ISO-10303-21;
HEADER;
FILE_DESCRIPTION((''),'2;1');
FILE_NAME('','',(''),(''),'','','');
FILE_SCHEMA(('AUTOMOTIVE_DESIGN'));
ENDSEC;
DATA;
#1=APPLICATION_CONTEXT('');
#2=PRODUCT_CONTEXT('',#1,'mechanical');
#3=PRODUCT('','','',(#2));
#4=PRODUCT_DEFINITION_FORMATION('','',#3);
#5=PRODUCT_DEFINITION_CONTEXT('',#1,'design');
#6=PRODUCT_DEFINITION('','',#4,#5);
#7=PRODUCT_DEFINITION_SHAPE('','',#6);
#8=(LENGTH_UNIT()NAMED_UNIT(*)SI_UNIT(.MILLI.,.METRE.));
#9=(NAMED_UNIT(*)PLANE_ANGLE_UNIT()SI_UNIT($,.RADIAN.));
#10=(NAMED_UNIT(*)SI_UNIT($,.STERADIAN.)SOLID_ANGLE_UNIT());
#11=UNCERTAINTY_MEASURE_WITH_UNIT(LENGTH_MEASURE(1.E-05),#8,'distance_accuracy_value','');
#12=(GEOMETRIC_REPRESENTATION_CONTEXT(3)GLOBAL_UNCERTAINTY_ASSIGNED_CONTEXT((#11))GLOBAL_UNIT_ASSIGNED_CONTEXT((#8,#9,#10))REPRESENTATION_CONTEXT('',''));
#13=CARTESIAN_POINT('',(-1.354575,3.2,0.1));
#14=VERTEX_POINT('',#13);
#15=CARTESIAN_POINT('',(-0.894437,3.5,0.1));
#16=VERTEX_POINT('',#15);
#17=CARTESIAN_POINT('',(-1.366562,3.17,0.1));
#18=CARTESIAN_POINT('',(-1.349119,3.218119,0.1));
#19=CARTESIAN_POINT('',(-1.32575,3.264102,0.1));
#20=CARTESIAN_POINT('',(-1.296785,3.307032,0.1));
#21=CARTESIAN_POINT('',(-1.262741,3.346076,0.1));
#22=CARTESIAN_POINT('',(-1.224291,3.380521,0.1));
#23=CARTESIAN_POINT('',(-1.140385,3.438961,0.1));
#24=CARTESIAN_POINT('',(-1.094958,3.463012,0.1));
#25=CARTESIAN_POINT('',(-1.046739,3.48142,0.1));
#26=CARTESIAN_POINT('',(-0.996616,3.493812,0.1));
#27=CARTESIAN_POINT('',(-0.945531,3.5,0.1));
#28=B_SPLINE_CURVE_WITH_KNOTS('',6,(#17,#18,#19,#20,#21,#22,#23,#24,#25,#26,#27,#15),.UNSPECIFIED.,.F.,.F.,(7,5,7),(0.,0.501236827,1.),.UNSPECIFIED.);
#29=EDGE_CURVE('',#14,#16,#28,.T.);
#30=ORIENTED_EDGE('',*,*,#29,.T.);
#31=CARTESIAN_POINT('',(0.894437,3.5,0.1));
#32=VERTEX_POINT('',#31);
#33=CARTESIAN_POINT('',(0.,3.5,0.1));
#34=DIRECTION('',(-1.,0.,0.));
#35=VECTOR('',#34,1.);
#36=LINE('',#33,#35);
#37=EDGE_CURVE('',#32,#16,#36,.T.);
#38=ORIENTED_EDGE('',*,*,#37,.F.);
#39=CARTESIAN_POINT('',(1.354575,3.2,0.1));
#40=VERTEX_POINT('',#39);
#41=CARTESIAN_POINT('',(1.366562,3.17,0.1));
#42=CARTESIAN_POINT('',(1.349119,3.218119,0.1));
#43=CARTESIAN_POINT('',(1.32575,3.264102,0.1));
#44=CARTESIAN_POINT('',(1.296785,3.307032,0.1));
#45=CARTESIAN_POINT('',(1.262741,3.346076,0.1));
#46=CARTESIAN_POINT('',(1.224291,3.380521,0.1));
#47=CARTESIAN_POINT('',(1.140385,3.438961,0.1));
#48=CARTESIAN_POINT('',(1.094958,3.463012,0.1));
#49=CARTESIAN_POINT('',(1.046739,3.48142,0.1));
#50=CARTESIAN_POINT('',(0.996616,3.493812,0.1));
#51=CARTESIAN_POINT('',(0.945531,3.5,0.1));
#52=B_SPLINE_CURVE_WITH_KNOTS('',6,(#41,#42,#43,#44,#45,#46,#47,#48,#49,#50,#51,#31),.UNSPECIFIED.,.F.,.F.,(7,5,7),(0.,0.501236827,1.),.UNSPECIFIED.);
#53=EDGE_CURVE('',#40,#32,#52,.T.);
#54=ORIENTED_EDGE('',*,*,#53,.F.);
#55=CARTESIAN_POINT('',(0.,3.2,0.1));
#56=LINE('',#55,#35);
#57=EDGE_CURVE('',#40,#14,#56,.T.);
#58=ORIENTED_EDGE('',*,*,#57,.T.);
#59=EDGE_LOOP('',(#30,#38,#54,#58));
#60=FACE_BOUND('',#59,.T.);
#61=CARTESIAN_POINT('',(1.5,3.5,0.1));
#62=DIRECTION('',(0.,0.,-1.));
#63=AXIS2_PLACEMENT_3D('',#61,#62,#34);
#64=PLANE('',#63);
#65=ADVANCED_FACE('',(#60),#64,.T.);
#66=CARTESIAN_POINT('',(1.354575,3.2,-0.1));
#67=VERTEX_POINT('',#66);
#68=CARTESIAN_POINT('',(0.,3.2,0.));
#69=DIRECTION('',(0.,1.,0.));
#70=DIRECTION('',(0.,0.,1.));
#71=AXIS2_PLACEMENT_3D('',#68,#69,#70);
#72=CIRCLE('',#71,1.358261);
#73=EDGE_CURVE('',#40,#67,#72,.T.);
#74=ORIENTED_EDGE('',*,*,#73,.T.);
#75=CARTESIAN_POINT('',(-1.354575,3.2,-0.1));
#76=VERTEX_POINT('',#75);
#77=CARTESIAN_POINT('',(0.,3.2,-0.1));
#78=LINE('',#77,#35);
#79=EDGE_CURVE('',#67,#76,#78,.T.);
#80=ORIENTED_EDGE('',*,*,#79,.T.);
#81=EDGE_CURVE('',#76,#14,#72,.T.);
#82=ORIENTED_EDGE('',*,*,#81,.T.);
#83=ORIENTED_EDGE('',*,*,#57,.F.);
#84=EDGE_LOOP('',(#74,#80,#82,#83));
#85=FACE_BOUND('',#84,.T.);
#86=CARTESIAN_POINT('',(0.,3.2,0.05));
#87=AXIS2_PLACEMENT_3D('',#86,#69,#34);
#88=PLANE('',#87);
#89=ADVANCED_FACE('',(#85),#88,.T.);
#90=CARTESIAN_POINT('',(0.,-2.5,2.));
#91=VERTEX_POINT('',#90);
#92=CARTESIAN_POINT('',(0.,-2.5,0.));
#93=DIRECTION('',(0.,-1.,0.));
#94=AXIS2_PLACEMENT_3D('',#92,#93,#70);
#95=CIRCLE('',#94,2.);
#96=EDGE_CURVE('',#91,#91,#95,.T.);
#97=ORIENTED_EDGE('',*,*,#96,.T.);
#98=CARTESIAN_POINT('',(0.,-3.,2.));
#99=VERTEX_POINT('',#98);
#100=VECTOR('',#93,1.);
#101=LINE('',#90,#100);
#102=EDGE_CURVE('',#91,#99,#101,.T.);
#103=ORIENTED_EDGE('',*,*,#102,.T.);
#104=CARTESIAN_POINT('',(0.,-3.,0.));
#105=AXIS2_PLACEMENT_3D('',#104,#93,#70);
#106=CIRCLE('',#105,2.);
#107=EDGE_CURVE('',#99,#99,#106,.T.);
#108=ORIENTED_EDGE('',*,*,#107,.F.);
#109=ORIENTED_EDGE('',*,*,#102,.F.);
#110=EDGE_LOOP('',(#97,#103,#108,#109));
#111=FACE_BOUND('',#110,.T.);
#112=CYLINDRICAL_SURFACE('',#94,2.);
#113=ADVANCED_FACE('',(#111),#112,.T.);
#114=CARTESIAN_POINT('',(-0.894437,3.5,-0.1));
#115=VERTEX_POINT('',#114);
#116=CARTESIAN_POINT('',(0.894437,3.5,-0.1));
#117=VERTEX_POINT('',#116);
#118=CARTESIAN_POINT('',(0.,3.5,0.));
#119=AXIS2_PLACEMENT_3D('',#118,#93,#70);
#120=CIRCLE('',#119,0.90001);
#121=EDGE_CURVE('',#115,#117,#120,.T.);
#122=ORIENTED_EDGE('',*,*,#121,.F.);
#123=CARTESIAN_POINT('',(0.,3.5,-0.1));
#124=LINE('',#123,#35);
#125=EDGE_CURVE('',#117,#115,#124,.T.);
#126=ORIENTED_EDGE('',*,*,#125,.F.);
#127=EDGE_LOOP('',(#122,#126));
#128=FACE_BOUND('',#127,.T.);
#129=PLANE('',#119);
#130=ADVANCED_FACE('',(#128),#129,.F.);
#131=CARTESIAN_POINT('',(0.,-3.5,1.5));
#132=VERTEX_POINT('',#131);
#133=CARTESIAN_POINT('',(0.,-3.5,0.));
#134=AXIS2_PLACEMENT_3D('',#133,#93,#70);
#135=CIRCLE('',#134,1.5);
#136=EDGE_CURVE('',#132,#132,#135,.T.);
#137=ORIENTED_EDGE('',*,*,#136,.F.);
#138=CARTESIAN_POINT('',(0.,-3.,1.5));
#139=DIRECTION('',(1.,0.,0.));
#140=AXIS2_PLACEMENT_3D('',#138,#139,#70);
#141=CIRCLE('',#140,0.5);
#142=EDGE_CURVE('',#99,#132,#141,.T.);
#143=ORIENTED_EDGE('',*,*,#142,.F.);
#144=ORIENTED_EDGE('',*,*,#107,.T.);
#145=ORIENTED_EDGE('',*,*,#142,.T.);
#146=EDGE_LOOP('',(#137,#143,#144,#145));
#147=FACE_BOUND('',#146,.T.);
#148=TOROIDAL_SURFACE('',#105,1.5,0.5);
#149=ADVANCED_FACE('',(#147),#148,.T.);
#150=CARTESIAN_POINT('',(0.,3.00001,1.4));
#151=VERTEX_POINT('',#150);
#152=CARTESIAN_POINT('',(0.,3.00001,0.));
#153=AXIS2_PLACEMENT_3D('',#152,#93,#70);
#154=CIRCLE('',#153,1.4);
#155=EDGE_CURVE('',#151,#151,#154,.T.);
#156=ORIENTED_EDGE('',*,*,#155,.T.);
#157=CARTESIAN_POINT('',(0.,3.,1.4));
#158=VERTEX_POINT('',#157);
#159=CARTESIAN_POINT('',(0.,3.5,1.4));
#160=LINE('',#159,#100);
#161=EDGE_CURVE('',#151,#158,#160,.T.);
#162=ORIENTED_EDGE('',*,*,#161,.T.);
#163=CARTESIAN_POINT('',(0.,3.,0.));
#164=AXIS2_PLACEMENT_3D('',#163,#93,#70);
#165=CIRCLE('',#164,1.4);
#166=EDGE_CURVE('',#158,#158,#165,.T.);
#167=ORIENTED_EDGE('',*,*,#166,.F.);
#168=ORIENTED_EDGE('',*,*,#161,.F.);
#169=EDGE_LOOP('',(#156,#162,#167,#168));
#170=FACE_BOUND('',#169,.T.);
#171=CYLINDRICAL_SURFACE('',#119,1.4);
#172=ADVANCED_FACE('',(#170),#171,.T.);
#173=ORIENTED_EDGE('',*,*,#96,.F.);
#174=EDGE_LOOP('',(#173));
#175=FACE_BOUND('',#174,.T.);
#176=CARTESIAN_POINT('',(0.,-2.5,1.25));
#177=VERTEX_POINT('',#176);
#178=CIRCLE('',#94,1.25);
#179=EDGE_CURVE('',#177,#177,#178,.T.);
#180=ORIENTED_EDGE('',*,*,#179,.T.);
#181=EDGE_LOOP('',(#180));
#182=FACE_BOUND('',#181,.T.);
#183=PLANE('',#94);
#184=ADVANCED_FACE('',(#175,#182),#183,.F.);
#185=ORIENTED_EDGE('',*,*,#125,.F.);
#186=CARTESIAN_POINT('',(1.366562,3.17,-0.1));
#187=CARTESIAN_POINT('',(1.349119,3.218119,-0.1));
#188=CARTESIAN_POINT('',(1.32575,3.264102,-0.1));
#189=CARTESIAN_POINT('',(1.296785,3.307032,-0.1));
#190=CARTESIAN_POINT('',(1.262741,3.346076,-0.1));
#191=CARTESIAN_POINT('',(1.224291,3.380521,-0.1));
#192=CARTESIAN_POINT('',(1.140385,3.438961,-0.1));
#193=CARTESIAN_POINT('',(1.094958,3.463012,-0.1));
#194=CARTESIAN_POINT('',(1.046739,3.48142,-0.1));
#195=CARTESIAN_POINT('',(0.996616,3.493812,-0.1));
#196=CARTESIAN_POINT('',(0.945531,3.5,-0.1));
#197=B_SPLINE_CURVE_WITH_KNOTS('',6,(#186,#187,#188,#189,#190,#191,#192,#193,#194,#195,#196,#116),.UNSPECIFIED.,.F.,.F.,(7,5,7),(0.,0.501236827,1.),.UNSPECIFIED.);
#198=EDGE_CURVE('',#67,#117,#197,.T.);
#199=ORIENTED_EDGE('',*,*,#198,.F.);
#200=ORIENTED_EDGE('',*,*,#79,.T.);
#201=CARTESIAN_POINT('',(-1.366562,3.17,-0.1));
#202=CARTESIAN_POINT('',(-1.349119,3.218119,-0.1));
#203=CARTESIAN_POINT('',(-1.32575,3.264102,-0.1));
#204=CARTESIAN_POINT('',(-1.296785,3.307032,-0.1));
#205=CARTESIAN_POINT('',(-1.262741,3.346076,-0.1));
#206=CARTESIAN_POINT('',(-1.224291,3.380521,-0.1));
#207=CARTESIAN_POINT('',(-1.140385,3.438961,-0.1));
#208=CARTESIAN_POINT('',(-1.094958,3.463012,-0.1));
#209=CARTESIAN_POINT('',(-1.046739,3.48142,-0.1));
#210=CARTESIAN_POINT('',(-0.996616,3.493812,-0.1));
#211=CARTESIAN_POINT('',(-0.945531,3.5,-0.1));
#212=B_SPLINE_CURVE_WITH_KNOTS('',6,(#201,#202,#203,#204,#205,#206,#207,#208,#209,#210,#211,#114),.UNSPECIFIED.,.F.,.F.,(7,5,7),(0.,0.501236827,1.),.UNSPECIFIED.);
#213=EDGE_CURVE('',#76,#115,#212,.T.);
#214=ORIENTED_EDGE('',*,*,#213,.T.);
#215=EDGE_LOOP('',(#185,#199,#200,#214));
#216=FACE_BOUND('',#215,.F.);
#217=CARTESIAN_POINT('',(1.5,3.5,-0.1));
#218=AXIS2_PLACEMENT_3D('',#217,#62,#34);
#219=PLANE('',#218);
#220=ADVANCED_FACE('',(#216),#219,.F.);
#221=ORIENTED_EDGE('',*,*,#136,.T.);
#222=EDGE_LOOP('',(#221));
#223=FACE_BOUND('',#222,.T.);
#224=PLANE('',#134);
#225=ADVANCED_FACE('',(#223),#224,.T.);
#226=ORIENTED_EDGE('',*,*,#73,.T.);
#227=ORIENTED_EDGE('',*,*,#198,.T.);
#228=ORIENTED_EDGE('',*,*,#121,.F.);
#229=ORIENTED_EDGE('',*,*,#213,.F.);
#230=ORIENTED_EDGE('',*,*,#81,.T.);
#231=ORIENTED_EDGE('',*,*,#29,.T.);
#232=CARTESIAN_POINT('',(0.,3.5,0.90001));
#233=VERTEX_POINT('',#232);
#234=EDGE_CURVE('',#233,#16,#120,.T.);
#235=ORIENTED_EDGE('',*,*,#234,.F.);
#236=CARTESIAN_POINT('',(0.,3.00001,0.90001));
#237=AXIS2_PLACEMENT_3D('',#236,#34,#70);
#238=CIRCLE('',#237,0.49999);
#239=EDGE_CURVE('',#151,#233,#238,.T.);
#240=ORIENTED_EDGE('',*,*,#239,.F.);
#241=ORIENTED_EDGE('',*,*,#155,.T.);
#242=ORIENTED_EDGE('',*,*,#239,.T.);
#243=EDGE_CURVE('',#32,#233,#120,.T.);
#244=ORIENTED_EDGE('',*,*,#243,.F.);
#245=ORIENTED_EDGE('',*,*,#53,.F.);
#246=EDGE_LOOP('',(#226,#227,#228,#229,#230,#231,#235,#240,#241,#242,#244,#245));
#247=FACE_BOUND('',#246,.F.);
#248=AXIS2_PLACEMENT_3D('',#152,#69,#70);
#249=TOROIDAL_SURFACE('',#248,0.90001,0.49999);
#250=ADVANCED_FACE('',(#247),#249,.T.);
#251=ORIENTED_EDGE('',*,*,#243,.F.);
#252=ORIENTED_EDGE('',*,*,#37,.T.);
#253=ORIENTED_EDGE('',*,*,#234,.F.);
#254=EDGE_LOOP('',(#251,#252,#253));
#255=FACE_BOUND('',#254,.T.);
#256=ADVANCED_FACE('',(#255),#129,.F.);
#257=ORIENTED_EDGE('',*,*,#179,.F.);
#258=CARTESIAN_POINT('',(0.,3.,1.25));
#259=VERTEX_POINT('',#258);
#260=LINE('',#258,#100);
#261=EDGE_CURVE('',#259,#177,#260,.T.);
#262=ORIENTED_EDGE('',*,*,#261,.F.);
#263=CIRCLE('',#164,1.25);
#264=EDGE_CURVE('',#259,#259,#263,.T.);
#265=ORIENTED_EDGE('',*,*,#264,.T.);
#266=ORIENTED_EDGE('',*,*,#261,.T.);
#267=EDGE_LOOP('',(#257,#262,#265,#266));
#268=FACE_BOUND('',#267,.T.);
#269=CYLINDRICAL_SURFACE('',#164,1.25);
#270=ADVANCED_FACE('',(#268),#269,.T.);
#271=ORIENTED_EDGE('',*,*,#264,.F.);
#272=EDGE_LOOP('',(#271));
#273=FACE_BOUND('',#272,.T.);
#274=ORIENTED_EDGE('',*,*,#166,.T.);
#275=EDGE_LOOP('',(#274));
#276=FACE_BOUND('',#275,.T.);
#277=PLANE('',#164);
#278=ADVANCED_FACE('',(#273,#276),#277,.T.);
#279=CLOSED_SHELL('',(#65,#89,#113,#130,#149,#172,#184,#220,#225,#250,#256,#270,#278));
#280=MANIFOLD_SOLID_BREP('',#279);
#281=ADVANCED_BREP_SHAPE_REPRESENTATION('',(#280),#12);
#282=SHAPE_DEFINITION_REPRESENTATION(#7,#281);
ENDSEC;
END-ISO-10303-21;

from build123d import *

# Parameters (mm, degrees)
F2_R     = 0.5
F3_R     = 0.49999
F4_W     = 3
F4_H     = 0.1
F5_DEPTH = 0.3


# Not quite as in the source:
# - a fillet or chamfer is up to 0.001 mm smaller than in the source, because OpenCascade refuses the exact size


with BuildPart() as f1:
    # F0 (on Right) → F1 (revolve)
    with BuildSketch(Plane.YZ):
        Polygon((-3.5, 0), (-2.5, 0), (3, 0), (3.5, 0), (3.5, 1.4), (3, 1.4), (3, 1.25), (-2.5, 1.25), (-2.5, 2), (-3.5, 2), align=None)
    revolve(axis=Axis((0, 0.25, 0), (0, -1, 0)))

    # F2
    f2_edges = [f1.edges().sort_by_distance(p)[0] for p in [
        (0, -3.5, -2),
    ]]
    fillet(f2_edges, radius=F2_R)

    # F3 (radius 0.5 in the source; OpenCascade refuses exactly that, so slightly less here)
    f3_edges = [f1.edges().sort_by_distance(p)[0] for p in [
        (0, 3.5, -1.4),
    ]]
    fillet(f3_edges, radius=F3_R)

    # F4 (on face) → F5 (cut)
    with BuildSketch(Plane(origin=(0, 3.5, 0), x_dir=(-1, 0, 0), z_dir=(0, 1, 0))):
        with Locations((0, 0.05)):
            Rectangle(F4_W, F4_H)
        with Locations((0, -0.05)):
            Rectangle(F4_W, F4_H)
    extrude(amount=-F5_DEPTH, mode=Mode.SUBTRACT)


solid = f1.part
